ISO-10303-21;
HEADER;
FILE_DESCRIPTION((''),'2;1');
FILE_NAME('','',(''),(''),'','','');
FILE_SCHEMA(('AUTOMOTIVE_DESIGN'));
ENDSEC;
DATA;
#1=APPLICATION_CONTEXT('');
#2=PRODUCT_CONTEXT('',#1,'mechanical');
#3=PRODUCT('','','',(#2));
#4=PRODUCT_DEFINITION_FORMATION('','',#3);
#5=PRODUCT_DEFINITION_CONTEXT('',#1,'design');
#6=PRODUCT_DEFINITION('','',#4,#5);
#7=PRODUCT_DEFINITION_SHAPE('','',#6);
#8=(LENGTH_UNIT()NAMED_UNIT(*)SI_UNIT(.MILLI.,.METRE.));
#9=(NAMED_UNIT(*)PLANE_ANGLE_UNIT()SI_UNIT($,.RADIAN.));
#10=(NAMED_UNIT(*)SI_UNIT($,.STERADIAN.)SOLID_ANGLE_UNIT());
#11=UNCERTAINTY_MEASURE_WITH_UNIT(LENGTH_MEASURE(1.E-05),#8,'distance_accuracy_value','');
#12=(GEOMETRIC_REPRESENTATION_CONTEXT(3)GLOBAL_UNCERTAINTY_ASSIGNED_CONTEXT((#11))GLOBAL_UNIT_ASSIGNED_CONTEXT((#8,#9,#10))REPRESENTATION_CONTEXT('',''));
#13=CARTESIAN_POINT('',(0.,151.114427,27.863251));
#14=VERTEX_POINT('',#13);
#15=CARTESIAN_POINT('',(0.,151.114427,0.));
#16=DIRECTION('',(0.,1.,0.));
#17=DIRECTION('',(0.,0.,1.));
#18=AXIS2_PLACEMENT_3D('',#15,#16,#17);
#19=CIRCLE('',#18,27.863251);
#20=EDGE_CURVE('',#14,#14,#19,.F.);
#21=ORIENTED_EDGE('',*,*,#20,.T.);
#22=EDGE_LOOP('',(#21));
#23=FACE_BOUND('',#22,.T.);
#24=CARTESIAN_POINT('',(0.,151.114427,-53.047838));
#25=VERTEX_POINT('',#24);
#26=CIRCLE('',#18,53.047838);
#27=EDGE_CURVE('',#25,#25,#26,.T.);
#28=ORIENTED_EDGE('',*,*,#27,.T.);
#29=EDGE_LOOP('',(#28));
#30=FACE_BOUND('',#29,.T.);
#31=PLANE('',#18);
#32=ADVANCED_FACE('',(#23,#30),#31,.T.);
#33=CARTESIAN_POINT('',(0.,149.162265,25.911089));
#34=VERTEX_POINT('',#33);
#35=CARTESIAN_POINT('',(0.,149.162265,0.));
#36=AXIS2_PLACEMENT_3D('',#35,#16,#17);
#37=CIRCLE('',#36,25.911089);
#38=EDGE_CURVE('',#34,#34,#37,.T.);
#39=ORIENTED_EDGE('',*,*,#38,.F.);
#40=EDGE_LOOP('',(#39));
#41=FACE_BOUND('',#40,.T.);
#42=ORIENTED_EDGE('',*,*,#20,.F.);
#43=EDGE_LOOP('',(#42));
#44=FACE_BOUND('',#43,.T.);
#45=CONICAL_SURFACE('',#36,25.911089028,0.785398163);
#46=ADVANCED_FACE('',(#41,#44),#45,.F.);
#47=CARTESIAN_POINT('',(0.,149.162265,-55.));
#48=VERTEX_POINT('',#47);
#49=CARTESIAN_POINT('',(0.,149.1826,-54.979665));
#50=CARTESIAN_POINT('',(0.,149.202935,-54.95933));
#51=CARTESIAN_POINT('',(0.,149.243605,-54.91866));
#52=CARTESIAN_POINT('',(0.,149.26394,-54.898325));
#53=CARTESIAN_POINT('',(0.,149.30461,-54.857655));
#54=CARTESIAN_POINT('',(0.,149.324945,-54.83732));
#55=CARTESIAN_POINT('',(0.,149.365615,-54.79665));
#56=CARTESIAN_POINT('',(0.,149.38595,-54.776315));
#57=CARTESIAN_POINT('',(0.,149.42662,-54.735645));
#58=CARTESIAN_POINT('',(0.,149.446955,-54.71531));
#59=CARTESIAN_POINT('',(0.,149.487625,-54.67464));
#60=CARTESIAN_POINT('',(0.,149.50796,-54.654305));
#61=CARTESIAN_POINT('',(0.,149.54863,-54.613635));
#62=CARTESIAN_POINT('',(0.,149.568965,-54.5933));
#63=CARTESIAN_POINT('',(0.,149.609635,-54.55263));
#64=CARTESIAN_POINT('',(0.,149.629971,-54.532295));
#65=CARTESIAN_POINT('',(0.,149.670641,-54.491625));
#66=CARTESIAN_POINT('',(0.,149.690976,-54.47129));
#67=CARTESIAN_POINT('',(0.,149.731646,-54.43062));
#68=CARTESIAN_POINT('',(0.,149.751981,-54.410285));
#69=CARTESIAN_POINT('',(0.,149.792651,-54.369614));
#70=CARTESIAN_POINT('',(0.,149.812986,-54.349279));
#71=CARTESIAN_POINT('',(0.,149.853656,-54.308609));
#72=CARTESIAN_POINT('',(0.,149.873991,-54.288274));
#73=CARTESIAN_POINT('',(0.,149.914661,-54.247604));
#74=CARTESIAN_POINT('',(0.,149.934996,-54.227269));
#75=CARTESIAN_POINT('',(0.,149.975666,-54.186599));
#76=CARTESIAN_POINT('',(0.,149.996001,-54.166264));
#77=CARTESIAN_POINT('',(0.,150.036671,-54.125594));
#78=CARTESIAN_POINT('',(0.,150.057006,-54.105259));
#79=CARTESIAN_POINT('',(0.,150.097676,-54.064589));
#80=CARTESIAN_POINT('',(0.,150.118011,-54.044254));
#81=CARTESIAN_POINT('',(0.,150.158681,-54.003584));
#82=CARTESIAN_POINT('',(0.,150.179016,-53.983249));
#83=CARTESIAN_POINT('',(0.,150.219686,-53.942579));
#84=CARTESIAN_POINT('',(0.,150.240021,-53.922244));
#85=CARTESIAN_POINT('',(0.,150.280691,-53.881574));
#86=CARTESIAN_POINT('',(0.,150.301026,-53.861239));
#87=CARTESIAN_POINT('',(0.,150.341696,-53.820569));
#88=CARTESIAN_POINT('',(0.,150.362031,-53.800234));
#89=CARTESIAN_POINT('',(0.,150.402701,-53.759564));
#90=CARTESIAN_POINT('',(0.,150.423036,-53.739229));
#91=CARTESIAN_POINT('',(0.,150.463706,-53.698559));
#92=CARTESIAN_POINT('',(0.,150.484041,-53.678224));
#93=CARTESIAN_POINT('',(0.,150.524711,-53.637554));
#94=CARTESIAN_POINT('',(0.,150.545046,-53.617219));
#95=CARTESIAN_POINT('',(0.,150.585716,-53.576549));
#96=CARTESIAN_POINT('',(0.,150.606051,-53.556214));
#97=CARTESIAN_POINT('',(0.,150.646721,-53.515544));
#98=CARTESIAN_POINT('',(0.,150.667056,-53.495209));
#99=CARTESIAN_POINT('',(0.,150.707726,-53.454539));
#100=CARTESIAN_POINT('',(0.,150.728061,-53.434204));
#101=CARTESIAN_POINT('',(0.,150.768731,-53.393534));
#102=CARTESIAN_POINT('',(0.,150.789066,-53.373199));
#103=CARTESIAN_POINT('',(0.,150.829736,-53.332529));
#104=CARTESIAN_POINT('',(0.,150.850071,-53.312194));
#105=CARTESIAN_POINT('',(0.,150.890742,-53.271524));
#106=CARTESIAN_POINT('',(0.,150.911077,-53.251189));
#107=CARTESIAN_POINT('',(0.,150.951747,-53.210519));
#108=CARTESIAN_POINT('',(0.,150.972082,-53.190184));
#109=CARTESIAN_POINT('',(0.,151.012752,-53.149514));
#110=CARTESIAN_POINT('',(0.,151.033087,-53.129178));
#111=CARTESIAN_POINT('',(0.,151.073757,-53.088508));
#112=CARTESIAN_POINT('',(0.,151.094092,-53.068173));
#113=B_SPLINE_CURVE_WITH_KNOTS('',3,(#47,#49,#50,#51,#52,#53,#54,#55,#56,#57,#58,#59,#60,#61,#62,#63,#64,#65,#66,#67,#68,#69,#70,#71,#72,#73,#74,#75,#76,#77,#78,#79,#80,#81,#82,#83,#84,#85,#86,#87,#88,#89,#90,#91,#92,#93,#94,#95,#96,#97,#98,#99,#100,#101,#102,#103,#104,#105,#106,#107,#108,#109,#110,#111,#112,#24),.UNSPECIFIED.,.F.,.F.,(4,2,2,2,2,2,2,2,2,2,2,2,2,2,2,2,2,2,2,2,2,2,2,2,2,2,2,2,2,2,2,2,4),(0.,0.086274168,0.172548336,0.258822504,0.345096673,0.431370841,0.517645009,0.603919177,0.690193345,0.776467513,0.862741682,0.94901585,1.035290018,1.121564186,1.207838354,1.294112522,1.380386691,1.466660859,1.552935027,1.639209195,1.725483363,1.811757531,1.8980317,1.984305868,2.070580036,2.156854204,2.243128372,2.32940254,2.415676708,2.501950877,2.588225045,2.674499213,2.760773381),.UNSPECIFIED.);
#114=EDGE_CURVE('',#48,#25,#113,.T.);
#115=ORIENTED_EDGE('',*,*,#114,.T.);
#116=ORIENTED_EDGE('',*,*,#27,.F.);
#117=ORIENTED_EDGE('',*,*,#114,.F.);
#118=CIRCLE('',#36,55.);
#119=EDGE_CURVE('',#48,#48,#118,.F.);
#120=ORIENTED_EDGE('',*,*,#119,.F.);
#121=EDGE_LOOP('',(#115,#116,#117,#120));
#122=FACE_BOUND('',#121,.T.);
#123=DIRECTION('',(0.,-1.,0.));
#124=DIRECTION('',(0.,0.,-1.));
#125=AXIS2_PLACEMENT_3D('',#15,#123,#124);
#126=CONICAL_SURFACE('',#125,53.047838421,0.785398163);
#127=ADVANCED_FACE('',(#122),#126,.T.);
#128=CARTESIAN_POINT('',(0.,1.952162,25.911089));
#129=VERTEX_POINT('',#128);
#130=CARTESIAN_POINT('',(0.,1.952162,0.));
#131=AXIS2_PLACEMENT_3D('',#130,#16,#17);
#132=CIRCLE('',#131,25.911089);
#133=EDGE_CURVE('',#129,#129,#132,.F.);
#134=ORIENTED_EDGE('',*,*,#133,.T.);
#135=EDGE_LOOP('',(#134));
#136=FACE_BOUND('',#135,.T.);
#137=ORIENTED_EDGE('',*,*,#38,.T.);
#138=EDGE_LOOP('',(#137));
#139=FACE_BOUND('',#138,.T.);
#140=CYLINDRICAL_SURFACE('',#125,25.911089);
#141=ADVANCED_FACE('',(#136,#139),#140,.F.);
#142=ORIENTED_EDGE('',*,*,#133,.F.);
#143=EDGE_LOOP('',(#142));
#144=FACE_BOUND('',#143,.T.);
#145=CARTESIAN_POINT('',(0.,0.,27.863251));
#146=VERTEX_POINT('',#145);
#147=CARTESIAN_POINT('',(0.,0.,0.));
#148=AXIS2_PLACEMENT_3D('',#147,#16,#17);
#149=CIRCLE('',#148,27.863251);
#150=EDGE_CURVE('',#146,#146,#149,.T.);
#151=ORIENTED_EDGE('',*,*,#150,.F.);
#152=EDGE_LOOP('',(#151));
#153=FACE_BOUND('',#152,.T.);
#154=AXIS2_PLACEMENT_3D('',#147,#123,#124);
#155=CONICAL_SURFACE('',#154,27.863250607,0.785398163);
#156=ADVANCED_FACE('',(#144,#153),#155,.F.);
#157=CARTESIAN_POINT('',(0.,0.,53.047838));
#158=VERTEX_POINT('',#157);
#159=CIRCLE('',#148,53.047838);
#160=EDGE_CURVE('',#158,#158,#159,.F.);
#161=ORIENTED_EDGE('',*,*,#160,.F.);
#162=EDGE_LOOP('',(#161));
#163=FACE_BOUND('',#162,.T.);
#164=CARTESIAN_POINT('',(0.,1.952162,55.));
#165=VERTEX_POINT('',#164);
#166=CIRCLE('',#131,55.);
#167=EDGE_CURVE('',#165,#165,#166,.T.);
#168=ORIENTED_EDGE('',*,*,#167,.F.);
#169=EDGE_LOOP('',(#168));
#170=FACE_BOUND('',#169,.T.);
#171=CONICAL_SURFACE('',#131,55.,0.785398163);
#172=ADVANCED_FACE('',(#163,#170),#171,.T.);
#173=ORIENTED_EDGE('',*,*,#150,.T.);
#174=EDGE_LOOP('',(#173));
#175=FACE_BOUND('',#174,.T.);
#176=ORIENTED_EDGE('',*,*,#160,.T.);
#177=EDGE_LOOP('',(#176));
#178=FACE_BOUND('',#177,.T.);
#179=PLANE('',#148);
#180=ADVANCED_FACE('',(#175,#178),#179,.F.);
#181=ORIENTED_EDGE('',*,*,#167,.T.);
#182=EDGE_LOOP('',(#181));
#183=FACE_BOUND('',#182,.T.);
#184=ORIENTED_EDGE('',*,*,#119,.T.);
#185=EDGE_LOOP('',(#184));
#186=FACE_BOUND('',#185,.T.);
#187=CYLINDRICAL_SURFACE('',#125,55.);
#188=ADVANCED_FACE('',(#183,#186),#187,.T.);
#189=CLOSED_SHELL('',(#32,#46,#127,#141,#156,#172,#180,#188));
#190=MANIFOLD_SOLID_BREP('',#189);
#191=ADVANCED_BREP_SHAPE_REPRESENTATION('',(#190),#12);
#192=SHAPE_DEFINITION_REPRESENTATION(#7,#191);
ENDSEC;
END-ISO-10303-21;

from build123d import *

# Parameters (mm, degrees)
SKETCH1_R           = 55
BOSS_EXTRUDE1_DEPTH = 151.114426705
SKETCH2_R           = 25.911089028
CUT_EXTRUDE1_DEPTH  = 170.957553402
CHAMFER1_SIZE       = 1.952161579


with BuildPart() as part:
    # Sketch1 → Boss-Extrude1 (new body)
    with BuildSketch(Plane(origin=(0, 0, 0), x_dir=(1, 0, 0), z_dir=(0, 1, 0))):
        Circle(SKETCH1_R)
    extrude(amount=BOSS_EXTRUDE1_DEPTH)

    # Sketch2 → Cut-Extrude1 (cut, through all)
    with BuildSketch(Plane(origin=(0, 0, 0), x_dir=(1, 0, 0), z_dir=(0, 1, 0))):
        Circle(SKETCH2_R)
    extrude(amount=CUT_EXTRUDE1_DEPTH, mode=Mode.SUBTRACT)

    # Chamfer1
    chamfer1_edges = [part.edges().sort_by_distance(p)[0] for p in [
        (-25.911089028, 151.114426705, 0),
        (-25.911089028, 0, 0),
        (-55, 0, 0),
        (-55, 151.114426705, 0),
    ]]
    chamfer(chamfer1_edges, length=CHAMFER1_SIZE)


solid = part.part
